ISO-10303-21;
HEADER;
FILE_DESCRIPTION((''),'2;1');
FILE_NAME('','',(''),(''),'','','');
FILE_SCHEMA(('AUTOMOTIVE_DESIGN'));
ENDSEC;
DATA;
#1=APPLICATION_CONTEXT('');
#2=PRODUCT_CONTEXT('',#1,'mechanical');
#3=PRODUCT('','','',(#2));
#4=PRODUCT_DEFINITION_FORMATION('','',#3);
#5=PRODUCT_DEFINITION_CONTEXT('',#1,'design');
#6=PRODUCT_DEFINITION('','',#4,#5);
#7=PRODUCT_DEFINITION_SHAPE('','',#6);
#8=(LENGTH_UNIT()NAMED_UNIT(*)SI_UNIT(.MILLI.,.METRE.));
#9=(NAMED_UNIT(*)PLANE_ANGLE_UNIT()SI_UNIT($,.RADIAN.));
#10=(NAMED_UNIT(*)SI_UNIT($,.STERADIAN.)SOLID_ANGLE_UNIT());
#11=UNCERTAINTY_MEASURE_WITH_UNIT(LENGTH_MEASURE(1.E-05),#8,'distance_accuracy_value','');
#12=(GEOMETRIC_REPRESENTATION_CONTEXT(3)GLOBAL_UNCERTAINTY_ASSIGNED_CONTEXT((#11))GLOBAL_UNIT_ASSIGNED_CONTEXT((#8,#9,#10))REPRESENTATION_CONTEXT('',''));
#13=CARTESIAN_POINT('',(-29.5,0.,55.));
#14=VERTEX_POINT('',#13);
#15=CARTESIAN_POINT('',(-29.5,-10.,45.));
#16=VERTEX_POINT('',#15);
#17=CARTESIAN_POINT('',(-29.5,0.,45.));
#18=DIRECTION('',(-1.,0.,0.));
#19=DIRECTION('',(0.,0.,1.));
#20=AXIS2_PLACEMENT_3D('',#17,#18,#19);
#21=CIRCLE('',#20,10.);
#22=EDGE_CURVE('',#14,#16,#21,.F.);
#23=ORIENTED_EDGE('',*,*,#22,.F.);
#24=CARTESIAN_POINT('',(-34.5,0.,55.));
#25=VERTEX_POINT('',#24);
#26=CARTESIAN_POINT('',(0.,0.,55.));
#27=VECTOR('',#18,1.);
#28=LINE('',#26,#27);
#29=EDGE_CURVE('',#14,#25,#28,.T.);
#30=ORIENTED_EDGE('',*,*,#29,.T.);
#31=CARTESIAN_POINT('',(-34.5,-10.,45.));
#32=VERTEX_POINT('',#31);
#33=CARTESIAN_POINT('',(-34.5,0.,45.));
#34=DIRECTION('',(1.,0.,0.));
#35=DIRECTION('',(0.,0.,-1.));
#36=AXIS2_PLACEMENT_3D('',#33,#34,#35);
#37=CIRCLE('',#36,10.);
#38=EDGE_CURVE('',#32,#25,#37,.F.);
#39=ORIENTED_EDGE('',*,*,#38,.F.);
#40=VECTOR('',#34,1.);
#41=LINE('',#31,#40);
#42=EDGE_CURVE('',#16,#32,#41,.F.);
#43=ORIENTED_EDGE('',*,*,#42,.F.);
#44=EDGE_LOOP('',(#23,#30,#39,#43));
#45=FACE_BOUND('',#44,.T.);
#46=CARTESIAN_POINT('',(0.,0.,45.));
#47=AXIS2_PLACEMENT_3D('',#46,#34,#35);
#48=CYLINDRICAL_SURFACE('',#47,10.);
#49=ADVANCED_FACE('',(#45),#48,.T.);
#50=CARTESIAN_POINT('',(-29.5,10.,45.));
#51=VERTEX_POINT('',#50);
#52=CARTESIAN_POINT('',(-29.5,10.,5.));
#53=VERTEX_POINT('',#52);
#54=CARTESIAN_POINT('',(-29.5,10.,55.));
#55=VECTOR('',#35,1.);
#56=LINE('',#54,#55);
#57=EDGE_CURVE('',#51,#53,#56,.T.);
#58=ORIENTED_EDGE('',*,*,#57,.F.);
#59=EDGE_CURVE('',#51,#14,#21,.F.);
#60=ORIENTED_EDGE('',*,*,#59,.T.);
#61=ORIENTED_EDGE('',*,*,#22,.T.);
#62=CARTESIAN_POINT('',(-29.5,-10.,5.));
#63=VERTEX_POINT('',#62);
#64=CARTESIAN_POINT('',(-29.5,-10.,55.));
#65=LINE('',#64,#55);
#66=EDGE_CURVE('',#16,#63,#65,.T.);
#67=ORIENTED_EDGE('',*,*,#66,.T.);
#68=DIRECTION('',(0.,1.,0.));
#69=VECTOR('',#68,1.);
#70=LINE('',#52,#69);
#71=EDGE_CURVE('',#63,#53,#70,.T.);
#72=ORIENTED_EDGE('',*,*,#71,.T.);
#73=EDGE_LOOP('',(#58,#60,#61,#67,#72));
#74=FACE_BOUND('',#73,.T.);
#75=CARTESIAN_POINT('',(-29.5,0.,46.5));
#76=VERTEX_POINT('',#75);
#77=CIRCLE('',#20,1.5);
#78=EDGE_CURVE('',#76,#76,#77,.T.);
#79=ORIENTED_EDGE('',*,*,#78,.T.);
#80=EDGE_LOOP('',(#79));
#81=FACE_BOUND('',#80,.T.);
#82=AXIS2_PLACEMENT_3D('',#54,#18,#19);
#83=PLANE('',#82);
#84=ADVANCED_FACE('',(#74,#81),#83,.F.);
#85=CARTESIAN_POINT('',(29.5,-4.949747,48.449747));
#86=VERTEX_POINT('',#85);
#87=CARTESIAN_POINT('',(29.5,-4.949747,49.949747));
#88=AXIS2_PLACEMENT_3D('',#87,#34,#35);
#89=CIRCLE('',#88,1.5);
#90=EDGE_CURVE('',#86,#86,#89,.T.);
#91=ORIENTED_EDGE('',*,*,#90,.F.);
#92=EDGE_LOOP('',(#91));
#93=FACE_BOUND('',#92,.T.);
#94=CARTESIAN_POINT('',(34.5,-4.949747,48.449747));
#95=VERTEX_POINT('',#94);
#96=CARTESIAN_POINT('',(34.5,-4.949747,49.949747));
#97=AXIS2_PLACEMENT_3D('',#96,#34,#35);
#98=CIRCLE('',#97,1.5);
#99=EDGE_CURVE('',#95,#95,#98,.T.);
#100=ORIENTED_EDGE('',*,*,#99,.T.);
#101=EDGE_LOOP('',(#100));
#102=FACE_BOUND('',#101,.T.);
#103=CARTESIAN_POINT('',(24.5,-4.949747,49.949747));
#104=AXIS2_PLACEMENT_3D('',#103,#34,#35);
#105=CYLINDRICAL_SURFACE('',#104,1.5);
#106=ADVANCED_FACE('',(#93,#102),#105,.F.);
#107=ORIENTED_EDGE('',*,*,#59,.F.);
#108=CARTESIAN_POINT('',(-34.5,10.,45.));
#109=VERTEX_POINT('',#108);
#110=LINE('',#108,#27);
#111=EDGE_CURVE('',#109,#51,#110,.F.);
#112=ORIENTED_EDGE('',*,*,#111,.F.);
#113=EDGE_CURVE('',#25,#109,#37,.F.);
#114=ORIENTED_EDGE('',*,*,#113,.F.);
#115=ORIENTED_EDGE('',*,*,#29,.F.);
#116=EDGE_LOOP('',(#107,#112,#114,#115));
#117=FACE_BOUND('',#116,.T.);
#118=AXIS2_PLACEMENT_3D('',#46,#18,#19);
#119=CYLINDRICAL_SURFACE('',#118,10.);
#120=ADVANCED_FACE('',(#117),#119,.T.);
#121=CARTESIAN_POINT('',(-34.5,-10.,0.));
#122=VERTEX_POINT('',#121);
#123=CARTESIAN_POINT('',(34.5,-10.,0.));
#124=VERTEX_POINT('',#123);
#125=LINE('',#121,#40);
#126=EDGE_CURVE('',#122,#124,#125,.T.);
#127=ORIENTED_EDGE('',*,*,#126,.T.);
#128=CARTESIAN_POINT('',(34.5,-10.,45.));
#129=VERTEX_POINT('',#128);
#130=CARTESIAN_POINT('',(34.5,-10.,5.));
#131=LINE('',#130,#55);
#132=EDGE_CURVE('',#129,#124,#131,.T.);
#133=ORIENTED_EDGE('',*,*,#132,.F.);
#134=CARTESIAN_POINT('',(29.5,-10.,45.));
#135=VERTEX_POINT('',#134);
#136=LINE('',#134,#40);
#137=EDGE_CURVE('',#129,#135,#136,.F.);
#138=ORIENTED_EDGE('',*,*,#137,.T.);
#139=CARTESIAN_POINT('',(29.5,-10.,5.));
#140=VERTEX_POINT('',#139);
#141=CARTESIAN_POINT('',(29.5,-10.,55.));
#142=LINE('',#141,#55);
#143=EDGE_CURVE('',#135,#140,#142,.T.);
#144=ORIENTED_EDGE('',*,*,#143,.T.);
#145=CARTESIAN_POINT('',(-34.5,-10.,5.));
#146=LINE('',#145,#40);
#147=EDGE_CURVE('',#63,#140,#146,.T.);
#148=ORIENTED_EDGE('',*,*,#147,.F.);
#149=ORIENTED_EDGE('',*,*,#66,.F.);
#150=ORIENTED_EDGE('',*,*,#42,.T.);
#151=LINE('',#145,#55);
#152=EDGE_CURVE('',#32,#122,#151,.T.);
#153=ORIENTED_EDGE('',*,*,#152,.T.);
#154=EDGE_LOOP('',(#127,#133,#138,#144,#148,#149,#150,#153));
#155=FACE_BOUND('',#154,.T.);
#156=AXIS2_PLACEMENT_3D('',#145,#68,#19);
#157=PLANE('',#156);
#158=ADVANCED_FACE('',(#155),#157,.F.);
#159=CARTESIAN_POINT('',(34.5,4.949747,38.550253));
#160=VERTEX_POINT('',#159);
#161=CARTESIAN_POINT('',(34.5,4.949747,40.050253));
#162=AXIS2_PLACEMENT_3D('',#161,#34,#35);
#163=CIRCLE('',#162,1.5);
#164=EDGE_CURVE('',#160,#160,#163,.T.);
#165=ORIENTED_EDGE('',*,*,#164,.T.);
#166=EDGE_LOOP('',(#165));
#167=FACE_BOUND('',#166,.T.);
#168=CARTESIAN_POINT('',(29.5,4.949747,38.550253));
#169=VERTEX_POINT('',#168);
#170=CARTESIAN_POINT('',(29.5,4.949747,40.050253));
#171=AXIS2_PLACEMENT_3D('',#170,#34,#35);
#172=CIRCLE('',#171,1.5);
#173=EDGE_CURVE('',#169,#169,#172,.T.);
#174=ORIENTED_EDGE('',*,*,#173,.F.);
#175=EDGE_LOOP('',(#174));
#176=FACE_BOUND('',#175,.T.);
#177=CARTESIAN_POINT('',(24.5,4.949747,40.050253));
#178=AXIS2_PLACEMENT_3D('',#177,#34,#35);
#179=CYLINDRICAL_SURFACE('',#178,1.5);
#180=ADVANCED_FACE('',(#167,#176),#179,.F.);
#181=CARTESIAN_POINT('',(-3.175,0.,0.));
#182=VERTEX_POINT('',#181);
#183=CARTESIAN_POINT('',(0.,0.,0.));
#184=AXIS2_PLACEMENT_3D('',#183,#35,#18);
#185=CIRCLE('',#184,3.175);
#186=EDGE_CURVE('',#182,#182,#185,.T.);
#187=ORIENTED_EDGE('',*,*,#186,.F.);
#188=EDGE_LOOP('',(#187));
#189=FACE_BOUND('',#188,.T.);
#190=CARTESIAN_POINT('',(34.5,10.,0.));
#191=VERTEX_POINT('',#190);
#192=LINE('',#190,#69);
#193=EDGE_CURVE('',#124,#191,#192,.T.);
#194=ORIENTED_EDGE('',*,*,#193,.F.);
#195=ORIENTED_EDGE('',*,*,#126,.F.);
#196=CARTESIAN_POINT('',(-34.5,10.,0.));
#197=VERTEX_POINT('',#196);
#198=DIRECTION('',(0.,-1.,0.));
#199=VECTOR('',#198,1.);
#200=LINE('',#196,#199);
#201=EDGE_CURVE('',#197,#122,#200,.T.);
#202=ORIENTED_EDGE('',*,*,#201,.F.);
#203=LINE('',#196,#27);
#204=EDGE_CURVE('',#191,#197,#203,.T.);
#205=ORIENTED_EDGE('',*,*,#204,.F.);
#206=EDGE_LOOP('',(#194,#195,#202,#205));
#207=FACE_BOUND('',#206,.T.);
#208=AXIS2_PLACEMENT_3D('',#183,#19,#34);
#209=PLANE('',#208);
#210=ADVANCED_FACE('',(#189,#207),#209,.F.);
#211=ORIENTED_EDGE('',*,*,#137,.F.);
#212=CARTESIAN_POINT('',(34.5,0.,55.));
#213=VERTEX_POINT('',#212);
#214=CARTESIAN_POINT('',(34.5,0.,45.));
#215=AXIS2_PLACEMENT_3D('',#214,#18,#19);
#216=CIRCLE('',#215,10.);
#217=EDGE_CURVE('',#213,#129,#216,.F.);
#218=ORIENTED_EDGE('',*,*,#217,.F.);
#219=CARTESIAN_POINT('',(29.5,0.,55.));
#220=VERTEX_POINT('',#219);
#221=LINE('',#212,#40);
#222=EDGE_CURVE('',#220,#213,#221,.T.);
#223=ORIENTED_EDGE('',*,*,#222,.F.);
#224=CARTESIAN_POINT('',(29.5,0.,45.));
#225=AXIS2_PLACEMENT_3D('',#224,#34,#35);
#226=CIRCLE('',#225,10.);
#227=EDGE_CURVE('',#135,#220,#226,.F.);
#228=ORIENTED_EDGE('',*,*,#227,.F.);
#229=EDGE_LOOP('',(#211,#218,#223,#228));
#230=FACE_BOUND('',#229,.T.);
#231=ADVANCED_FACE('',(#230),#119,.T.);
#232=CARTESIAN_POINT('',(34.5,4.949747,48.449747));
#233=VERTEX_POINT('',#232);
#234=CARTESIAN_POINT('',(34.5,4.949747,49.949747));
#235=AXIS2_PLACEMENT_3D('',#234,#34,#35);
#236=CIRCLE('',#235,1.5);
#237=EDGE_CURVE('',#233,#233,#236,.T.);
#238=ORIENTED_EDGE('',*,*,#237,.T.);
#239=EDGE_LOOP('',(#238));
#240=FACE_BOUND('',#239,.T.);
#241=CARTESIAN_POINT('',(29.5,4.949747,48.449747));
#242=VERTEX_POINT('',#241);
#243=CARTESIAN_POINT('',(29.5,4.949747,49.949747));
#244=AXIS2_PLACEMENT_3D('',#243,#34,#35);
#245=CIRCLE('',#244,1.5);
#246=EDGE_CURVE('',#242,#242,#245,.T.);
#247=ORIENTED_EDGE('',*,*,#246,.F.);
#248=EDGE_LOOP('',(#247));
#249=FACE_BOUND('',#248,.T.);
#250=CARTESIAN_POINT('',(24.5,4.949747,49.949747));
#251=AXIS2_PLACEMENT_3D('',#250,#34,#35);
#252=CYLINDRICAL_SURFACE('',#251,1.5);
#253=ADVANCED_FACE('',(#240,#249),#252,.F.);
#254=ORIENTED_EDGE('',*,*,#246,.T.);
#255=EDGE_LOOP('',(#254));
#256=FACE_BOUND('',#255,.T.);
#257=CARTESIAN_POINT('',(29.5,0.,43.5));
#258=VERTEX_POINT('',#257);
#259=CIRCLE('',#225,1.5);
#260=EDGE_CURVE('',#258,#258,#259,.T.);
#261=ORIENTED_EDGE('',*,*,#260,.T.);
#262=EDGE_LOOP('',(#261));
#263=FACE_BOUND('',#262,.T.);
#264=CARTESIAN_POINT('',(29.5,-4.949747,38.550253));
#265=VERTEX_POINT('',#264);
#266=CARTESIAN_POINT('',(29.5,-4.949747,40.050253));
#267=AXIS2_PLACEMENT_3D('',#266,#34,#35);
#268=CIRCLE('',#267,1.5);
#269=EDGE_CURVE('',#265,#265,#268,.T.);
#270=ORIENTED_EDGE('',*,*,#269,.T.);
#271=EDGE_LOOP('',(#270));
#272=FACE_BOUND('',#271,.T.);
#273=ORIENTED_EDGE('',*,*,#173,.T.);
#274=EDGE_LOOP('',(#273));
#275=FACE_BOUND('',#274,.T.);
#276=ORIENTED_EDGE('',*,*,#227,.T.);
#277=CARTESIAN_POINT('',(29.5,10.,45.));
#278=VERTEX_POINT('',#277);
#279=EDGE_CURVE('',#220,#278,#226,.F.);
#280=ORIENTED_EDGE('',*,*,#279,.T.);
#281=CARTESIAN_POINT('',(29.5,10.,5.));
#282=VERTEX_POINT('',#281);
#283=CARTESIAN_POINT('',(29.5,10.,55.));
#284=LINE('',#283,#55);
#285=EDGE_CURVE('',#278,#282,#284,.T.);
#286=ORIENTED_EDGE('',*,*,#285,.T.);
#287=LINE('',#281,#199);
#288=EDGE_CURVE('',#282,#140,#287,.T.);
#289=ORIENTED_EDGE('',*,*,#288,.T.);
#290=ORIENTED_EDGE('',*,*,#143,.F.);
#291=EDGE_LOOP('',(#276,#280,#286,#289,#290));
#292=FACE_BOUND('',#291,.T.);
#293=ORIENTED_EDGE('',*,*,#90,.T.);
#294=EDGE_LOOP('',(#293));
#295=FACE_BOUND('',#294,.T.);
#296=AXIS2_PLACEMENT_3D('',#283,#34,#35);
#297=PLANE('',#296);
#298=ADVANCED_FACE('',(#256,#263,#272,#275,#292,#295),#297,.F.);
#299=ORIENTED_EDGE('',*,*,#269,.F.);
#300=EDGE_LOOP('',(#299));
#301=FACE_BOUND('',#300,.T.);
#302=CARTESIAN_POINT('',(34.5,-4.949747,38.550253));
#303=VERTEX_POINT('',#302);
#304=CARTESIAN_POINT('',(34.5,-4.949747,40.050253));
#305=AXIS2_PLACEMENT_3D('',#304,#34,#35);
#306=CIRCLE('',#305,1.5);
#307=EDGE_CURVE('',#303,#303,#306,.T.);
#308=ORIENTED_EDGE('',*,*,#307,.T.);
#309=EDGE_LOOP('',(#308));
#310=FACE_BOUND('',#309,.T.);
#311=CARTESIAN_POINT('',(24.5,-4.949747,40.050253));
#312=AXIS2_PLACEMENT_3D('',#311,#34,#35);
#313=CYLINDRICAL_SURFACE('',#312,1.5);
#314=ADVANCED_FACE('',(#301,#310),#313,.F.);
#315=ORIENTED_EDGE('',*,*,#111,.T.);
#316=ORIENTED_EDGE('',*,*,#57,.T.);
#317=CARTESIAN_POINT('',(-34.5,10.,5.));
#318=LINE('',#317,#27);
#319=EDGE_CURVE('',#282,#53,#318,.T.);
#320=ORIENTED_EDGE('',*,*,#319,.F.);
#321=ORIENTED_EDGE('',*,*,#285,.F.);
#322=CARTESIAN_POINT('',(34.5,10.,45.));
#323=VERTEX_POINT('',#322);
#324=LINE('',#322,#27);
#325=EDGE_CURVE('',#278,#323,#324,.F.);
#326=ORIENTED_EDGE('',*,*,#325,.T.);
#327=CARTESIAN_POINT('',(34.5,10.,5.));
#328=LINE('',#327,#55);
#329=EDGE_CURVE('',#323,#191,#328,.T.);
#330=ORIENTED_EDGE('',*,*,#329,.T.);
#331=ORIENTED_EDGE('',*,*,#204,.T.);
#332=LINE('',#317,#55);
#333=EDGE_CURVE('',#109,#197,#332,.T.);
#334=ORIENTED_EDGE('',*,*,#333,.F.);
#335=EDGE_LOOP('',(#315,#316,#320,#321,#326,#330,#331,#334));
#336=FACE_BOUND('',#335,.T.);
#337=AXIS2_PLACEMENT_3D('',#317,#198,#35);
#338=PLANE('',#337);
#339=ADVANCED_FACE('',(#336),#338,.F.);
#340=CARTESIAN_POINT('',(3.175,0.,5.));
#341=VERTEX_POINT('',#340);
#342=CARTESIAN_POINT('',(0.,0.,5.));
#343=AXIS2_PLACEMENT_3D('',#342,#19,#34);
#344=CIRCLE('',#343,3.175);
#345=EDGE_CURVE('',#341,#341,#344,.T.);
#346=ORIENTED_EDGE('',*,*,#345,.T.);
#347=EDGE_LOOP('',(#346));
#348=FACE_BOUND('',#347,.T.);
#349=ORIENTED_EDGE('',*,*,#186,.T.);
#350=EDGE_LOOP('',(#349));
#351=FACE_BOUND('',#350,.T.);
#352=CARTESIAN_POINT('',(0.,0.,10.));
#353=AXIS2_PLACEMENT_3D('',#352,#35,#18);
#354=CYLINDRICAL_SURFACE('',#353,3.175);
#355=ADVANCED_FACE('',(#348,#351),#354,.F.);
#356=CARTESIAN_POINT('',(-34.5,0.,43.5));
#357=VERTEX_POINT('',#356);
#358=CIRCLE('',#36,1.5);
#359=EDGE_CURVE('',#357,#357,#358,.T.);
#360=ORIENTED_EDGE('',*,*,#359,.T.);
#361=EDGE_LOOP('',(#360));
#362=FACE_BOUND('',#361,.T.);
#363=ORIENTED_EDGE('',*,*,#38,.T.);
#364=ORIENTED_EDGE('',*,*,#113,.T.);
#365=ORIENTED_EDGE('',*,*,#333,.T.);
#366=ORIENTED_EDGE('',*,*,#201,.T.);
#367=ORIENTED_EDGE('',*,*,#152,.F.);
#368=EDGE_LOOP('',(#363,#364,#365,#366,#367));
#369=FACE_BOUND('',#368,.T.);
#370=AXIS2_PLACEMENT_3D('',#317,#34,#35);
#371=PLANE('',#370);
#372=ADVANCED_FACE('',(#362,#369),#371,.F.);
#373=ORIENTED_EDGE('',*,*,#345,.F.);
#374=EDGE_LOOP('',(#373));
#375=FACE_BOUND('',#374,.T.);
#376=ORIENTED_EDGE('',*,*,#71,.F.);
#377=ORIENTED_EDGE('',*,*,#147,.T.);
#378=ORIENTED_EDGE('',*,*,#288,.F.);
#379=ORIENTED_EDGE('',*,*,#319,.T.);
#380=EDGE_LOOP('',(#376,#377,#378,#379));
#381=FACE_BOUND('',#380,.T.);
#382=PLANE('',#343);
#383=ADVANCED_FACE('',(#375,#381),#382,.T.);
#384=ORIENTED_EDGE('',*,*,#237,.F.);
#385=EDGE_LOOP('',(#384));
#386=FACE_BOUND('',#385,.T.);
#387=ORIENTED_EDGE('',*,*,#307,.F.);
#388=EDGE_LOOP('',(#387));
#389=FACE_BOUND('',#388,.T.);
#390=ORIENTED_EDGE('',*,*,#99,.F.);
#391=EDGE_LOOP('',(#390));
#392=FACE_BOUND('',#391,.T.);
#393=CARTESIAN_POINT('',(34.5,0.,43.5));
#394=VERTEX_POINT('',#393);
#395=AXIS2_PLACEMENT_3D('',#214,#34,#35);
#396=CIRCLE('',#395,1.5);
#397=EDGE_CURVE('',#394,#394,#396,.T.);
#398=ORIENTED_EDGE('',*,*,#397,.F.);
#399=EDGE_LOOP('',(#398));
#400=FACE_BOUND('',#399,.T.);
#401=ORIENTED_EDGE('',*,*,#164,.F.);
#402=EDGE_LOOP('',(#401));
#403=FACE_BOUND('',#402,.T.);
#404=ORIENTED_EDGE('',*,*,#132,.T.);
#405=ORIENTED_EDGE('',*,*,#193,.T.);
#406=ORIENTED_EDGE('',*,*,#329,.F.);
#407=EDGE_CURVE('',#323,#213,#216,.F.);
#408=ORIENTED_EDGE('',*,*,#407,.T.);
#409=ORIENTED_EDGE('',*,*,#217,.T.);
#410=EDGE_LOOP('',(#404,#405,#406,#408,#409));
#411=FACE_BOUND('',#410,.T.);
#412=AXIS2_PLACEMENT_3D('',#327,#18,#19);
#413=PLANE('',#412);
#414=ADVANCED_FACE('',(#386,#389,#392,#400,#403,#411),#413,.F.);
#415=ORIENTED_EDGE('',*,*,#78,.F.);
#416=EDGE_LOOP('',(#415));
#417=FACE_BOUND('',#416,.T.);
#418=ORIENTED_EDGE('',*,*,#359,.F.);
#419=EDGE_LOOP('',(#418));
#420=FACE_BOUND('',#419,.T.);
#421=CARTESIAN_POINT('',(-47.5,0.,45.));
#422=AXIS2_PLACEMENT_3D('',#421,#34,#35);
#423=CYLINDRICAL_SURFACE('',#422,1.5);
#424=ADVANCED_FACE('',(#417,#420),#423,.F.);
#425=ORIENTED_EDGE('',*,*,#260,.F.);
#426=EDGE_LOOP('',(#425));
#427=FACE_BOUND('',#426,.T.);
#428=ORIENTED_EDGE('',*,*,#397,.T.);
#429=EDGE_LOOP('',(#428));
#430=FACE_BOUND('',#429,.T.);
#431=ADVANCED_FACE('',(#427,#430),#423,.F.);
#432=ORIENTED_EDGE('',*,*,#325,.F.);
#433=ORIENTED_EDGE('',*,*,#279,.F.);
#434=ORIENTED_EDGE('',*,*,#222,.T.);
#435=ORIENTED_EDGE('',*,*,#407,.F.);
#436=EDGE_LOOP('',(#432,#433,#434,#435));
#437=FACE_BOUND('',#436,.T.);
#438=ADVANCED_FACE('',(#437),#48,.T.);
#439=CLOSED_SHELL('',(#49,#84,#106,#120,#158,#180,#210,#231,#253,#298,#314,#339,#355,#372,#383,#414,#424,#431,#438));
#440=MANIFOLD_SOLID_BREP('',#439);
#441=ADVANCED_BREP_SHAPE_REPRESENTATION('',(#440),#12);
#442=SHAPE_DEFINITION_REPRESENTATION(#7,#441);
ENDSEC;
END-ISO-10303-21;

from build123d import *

# Parameters (mm, degrees)
SKETCH_1_W          = 69
SKETCH_1_H          = 20
EXTRUDE_1_DEPTH     = 5
SKETCH_2_W          = 5
SKETCH_2_H          = 20
EXTRUDE_2_DEPTH     = 50
FILLET_1_R          = 10
SKETCH_3_R          = 1.5
CUT_EXTRUDE_1_DEPTH = 82
SKETCH_4_R          = 1.5
CUT_EXTRUDE_2_DEPTH = 10
SKETCH_5_R          = 3.175
CUT_EXTRUDE_3_DEPTH = 10


with BuildPart() as part:
    # 草图1 → 凸台-拉伸1 (new body)
    with BuildSketch(Plane.XY):
        Rectangle(SKETCH_1_W, SKETCH_1_H)
    extrude(amount=EXTRUDE_1_DEPTH)

    # 草图2 → 凸台-拉伸2 (add)
    with BuildSketch(Plane.XY.offset(5)):
        with Locations((-32, 0)):
            Rectangle(SKETCH_2_W, SKETCH_2_H)
        with Locations((32, 0)):
            Rectangle(SKETCH_2_W, SKETCH_2_H)
    extrude(amount=EXTRUDE_2_DEPTH)

    # 圆角1
    fillet_1_edges = [part.edges().sort_by_distance(p)[0] for p in [
        (-32, -10, 55),
        (-32, 10, 55),
        (32, 10, 55),
        (32, -10, 55),
    ]]
    fillet(fillet_1_edges, radius=FILLET_1_R - 0.0001)  # a hair under: the kernel refuses the full size

    # 草图3 → 切除-拉伸1 (cut)
    with BuildSketch(Plane(origin=(34.5, 0, 0), x_dir=(0, 0, -1), z_dir=(1, 0, 0))):
        with Locations((-45, 0)):
            Circle(SKETCH_3_R)
    extrude(amount=-CUT_EXTRUDE_1_DEPTH, mode=Mode.SUBTRACT)

    # 草图4 → 切除-拉伸2 (cut)
    with BuildSketch(Plane(origin=(34.5, 0, 0), x_dir=(0, 0, -1), z_dir=(1, 0, 0))):
        with Locations((-49.949747468, 4.949747468)):
            Circle(SKETCH_4_R)
        with Locations((-40.050252532, 4.949747468)):
            Circle(SKETCH_4_R)
        with Locations((-40.050252532, -4.949747468)):
            Circle(SKETCH_4_R)
        with Locations((-49.949747468, -4.949747468)):
            Circle(SKETCH_4_R)
    extrude(amount=-CUT_EXTRUDE_2_DEPTH, mode=Mode.SUBTRACT)

    # 草图5 → 切除-拉伸3 (cut)
    with BuildSketch(Plane(origin=(0, 0, 0), x_dir=(-1, 0, 0), z_dir=(0, 0, -1))):
        Circle(SKETCH_5_R)
    extrude(amount=-CUT_EXTRUDE_3_DEPTH, mode=Mode.SUBTRACT)


solid = part.part
